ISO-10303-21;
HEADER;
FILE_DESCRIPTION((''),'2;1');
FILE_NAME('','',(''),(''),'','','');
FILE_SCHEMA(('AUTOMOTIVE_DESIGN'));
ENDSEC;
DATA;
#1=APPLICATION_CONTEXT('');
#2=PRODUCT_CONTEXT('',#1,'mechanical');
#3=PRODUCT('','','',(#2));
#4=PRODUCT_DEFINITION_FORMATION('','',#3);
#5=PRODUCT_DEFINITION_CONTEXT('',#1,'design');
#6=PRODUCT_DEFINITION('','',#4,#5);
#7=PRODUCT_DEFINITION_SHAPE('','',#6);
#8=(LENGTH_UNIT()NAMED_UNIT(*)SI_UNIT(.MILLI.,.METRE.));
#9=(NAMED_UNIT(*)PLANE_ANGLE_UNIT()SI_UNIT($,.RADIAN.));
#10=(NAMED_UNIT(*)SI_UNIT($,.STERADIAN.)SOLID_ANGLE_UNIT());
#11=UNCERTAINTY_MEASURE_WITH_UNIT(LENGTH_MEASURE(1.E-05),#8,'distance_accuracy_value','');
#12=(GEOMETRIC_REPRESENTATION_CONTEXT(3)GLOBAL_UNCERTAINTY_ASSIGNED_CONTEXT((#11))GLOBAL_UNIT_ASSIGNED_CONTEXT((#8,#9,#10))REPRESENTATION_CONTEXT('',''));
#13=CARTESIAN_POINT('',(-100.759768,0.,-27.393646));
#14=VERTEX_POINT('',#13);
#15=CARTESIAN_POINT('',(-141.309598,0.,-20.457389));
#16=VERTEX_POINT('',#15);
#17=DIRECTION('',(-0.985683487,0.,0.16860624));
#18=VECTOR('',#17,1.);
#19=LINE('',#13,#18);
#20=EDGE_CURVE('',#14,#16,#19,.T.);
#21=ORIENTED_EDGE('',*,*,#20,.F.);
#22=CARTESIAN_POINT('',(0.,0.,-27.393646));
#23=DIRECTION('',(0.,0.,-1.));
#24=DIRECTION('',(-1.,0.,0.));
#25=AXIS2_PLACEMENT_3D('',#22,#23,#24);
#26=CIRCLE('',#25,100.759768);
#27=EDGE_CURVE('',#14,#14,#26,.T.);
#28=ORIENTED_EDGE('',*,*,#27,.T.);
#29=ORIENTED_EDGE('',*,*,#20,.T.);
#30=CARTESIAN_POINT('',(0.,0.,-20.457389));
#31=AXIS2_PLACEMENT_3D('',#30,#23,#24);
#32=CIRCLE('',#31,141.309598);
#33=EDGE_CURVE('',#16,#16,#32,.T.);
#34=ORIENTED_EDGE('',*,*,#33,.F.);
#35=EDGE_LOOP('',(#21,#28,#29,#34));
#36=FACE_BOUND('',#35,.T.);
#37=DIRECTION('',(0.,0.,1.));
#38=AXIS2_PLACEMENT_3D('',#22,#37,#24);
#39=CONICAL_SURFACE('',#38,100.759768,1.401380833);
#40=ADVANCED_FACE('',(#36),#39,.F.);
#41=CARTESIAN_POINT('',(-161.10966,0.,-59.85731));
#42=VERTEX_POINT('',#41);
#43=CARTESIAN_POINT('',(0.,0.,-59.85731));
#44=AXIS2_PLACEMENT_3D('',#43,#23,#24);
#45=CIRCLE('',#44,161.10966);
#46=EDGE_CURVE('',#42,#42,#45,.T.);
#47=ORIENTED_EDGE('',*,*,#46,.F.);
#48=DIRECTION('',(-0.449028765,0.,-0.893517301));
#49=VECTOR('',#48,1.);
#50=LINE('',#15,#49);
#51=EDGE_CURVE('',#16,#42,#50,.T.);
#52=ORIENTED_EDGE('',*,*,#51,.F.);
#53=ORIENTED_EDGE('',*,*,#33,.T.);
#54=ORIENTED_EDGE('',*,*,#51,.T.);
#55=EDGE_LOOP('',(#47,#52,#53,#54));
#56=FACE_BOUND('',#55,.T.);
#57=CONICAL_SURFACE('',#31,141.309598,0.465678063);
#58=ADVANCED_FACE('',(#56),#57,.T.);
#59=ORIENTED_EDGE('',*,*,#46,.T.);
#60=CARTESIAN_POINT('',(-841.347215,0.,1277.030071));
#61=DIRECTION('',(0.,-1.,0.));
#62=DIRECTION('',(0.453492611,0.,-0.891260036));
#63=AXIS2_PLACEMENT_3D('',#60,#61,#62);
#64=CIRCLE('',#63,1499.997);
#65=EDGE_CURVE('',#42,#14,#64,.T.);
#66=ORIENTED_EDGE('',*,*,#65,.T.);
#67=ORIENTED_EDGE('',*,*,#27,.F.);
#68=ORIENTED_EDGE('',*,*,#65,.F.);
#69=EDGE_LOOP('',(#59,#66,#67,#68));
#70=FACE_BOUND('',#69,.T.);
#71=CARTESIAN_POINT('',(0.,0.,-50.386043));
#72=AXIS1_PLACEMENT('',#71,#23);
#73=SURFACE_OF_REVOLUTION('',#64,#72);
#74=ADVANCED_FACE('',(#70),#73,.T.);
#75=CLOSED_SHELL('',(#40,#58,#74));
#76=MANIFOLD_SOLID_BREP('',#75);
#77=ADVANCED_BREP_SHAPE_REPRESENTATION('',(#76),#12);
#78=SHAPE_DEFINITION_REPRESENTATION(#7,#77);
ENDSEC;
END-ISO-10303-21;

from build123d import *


# Not quite as in the source:
# - a feature of the source that left no trace in its solid (it failed there, or was rolled back) is left out


with BuildPart() as f1:
    # F0 (on Front) → F1 (revolve)
    with BuildSketch(Plane.XZ):
        with BuildLine():
            ThreePointArc((-161.10966, -59.8573098), (-130.7493020114, -43.9701584499), (-100.759768, -27.393646))
            Line((-100.759768, -27.393646), (-141.309598, -20.4573886))
            Line((-141.309598, -20.4573886), (-161.10966, -59.8573098))
        make_face()
    revolve(axis=Axis((0, 0, -50.3860435), (0, 0, -1)))


solid = f1.part
